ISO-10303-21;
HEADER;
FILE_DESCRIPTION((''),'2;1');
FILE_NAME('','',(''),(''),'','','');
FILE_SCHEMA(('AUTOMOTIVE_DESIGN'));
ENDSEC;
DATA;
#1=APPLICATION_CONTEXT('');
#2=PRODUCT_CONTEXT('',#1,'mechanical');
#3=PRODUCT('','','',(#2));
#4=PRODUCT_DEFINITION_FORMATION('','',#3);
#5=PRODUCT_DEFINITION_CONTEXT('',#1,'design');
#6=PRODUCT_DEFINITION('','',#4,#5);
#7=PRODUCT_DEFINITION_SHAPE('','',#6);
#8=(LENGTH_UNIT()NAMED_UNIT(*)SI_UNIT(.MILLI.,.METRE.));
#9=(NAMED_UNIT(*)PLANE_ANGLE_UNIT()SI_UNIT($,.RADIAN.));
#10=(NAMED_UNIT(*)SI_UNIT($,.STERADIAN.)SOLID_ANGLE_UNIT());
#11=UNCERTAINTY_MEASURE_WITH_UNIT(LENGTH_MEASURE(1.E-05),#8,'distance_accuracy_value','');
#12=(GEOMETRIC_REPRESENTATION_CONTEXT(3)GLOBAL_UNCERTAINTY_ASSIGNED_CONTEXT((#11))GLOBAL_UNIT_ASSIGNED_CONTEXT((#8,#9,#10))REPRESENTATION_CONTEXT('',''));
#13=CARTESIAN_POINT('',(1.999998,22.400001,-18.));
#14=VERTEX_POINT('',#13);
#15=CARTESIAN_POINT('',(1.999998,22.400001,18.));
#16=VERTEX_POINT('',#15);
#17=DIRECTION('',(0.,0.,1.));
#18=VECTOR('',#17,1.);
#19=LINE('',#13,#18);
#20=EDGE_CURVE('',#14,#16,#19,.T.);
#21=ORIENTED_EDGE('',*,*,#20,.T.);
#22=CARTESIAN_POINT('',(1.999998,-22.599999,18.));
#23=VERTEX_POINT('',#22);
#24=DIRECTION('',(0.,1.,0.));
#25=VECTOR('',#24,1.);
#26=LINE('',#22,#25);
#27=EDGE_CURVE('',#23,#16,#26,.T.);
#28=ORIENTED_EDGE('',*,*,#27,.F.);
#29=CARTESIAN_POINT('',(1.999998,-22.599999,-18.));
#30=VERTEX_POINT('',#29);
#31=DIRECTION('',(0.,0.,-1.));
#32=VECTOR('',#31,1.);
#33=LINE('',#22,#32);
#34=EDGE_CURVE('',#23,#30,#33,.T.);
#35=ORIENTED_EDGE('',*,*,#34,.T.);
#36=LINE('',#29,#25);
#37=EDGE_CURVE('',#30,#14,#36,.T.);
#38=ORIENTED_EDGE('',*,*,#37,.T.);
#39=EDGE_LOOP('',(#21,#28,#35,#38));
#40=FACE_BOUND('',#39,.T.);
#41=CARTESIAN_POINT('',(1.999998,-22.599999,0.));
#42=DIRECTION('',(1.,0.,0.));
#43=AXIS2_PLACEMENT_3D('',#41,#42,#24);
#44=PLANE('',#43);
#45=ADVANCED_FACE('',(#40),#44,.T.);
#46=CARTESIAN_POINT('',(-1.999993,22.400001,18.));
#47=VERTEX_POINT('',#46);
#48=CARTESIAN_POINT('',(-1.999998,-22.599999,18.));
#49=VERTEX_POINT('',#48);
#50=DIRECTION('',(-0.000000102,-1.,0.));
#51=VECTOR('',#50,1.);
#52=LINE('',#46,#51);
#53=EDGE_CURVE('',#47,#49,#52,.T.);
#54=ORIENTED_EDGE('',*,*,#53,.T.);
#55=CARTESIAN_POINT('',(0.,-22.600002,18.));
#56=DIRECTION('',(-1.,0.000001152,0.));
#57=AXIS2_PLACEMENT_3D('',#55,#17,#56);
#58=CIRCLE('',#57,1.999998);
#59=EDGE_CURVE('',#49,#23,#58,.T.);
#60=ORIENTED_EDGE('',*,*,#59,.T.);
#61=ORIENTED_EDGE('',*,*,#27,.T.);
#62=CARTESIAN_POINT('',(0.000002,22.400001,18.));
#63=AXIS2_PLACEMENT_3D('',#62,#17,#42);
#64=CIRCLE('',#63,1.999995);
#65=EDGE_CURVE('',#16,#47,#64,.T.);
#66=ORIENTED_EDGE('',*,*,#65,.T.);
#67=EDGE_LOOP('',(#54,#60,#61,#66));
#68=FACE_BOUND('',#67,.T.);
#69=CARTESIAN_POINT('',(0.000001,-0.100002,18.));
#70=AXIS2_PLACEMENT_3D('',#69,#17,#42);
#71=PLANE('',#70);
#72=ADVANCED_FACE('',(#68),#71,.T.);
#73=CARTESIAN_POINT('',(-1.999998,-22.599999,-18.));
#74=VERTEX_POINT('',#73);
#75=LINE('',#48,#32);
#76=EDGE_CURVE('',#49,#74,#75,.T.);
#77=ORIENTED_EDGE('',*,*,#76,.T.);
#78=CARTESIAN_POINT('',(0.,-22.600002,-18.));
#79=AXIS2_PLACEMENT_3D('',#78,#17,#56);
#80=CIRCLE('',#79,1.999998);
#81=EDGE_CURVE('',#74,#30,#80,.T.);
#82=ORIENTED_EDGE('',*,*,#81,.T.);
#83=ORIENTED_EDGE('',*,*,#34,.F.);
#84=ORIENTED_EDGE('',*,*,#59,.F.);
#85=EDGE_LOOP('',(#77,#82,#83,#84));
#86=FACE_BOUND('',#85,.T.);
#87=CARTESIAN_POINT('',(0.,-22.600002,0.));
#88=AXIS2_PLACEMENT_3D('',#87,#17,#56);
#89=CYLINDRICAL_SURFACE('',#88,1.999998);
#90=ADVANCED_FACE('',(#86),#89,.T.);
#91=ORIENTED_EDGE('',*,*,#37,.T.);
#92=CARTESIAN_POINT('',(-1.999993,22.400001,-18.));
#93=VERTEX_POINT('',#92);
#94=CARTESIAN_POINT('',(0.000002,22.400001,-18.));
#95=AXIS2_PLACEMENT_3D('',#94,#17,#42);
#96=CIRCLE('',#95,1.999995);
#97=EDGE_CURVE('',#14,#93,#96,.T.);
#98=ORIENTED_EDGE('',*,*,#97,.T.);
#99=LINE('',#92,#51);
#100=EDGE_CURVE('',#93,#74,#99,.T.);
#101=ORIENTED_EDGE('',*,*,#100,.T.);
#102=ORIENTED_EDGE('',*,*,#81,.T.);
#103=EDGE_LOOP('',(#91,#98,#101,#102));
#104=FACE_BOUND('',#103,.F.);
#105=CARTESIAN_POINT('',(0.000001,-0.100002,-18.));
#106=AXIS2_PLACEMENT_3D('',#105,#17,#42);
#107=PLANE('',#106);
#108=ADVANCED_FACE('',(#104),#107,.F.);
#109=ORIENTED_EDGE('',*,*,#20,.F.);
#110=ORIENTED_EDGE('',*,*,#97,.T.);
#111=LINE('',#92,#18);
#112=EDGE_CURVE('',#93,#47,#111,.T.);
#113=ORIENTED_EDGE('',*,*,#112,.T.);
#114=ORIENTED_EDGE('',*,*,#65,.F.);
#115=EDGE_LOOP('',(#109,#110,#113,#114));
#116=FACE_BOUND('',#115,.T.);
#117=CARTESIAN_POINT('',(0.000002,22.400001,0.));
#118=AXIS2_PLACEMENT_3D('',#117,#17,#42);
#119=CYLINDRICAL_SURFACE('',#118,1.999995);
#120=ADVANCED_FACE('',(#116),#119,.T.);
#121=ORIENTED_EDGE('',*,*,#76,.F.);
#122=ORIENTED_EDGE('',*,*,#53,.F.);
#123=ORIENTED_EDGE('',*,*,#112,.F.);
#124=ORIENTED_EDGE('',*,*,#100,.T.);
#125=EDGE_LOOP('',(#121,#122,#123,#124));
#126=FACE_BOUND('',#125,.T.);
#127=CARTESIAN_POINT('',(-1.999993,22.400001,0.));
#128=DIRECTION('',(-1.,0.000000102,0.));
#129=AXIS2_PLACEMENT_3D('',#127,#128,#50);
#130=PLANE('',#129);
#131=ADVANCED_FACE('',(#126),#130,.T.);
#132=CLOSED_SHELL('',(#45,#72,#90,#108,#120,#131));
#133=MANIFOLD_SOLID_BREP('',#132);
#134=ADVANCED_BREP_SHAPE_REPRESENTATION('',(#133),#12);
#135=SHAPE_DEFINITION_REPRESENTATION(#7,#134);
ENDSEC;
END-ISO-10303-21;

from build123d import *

# Parameters (mm, degrees)
F1_DEPTH = 18


# Not quite as in the source:
# - ends of sketch curves that miss each other by under 0.0002 mm in the source are joined


with BuildPart() as f1:
    # F0 (on Top) → F1 (new body, symmetric)
    with BuildSketch(Plane.XY):
        with BuildLine():
            Line((1.9999976953, -22.5999992664), (1.9999976953, 22.4000007336))
            ThreePointArc((1.9999976953, 22.4000007336), (2.3047e-06, 24.3999961241), (-1.9999930858, 22.4000007336))
            Line((-1.9999930858, 22.4000007336), (-1.9999976953, -22.5999992664))
            ThreePointArc((-1.9999976953, -22.5999992664), (-2.3047e-06, -24.5999992664), (1.9999976953, -22.5999992664))
        make_face()
    extrude(amount=F1_DEPTH, both=True)


solid = f1.part
